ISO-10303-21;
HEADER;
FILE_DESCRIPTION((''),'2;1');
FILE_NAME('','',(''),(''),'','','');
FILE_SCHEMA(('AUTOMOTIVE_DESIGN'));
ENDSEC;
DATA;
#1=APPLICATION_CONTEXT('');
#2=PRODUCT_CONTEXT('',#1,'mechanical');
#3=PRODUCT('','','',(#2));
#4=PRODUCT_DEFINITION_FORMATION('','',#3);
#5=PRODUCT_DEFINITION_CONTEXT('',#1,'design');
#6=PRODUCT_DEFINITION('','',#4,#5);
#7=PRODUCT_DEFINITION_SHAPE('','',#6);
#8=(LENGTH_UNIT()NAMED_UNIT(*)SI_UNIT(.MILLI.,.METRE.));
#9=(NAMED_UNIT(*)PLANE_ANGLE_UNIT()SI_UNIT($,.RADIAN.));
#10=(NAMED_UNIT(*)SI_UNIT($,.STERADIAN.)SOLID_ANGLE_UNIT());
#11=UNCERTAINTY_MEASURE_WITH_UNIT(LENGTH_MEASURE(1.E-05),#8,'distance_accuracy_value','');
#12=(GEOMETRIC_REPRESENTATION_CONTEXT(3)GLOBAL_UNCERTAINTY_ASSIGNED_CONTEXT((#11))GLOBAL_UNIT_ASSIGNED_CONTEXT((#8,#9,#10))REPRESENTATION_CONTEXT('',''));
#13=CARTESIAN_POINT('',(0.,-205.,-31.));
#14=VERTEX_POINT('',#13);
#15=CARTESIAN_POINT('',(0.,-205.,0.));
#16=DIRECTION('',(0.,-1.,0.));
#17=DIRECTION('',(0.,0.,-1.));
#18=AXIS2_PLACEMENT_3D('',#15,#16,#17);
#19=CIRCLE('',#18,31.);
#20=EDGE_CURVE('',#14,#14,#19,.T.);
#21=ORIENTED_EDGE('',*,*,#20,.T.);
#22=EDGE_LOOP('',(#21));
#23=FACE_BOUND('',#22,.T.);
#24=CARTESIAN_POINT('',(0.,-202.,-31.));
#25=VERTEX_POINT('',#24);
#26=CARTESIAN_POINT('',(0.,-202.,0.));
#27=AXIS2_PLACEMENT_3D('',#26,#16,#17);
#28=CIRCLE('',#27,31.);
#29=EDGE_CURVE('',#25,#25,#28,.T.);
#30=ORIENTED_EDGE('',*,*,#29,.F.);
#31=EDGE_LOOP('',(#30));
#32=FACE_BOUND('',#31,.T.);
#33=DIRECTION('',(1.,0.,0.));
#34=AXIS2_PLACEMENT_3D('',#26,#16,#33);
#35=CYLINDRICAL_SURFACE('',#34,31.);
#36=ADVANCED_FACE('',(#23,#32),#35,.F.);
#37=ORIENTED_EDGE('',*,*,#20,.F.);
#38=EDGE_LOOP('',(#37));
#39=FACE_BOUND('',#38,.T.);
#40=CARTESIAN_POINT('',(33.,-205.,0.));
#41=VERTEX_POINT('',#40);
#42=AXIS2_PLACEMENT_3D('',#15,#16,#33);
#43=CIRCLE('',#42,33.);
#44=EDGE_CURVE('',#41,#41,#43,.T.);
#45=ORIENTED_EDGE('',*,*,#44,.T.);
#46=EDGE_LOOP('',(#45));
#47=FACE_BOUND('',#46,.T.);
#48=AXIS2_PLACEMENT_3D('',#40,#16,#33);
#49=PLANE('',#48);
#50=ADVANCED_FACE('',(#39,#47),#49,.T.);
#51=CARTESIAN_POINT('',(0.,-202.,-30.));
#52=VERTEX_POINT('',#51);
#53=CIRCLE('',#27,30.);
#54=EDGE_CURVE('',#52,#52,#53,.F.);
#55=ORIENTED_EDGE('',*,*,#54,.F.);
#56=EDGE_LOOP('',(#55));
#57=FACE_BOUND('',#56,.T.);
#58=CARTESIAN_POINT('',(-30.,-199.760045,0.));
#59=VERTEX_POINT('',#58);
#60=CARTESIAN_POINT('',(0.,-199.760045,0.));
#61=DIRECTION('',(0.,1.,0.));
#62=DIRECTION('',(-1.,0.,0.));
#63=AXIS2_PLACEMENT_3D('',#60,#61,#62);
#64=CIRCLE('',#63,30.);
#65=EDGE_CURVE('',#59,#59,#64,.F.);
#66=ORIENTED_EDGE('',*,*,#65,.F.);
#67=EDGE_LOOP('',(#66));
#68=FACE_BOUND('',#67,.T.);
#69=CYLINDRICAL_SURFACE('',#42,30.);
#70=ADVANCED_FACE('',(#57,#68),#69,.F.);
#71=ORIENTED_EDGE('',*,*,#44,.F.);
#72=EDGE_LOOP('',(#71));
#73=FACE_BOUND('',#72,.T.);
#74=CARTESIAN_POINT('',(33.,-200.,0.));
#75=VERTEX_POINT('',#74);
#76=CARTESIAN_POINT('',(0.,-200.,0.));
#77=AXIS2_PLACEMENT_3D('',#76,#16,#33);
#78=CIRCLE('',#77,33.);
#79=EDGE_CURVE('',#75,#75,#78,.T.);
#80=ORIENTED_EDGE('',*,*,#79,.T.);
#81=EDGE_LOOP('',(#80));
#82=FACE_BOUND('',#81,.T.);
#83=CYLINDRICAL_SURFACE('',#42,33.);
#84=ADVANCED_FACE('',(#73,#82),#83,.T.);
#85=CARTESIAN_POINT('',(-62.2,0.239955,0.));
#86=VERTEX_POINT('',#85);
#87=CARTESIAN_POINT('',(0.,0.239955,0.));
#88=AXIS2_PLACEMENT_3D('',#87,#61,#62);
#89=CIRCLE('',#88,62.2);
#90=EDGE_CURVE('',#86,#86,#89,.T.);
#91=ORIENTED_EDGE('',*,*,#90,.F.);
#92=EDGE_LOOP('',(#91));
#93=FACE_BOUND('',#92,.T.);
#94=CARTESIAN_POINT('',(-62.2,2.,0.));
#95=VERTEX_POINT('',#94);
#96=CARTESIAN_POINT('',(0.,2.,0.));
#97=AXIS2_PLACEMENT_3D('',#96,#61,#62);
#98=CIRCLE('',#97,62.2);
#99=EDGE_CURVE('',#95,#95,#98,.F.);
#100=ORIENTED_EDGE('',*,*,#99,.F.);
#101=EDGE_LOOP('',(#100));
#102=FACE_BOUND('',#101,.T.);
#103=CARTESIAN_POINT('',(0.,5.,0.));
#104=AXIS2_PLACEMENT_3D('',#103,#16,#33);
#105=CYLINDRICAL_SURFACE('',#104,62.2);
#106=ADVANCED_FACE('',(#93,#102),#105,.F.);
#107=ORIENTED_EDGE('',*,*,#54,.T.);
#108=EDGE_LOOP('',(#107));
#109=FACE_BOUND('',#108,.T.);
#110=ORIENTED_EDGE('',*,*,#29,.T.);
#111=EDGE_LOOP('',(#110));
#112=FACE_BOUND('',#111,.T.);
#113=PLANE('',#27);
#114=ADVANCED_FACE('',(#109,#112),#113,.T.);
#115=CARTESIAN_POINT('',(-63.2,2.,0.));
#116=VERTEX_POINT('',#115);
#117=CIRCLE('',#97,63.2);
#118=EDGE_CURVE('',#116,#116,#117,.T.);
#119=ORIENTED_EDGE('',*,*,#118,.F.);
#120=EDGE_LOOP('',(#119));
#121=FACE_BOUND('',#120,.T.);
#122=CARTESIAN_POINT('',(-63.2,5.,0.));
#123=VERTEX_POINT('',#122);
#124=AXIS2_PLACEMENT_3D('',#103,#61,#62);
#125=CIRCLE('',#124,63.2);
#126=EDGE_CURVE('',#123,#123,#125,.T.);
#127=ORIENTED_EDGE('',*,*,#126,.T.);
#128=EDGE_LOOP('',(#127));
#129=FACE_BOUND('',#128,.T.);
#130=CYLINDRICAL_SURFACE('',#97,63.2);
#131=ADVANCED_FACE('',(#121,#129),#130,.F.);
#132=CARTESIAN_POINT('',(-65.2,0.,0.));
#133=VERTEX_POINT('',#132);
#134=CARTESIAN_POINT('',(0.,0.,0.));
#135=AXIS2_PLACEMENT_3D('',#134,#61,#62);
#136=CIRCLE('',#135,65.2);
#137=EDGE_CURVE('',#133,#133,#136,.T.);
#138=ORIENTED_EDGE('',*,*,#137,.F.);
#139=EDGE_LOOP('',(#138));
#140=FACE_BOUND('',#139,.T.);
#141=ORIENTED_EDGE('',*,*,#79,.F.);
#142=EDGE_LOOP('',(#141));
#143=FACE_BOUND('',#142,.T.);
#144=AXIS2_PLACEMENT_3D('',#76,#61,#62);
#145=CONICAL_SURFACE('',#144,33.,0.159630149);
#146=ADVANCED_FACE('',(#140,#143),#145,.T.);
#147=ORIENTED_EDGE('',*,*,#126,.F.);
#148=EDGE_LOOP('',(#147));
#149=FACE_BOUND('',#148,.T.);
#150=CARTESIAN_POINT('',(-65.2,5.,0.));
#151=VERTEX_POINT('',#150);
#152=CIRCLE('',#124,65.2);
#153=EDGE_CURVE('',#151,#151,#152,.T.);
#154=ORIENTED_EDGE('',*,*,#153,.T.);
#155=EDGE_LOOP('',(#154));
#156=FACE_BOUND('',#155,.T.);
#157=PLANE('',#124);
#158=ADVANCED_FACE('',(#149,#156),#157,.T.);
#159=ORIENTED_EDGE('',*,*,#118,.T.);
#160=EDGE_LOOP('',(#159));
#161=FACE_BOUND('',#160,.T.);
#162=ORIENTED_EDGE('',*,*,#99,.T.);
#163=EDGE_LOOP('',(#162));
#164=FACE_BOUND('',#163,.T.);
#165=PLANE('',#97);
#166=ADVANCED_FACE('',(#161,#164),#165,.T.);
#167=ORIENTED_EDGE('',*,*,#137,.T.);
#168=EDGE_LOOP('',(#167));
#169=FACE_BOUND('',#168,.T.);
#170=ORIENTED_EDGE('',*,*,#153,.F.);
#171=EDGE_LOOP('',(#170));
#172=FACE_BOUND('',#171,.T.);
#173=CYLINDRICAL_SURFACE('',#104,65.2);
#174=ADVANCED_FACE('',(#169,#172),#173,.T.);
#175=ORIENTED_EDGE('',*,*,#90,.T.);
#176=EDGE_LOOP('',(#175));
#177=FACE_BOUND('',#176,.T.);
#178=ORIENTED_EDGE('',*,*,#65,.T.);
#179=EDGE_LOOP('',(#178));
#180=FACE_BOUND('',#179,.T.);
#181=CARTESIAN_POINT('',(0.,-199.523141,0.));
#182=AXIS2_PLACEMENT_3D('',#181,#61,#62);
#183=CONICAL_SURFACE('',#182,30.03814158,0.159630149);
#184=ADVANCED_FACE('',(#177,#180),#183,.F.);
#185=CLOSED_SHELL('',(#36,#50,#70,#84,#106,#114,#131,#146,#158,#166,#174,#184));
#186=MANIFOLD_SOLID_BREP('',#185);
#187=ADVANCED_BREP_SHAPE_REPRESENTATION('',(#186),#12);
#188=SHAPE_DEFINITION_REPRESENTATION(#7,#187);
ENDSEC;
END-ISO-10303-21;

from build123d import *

# Parameters (mm, degrees)
SKETCH_3_R          = 65.2
EXTRUDE_2_DEPTH     = 5
SHELL_1_T           = -3
CUT_EXTRUDE_START   = -3
SKETCH_4_R          = 63.2
SKETCH_4_R_2        = 62.2
CUT_EXTRUDE_3_DEPTH = 3
SKETCH_7_R          = 31
SKETCH_7_R_2        = 30
CUT_EXTRUDE_6_DEPTH = 3


with BuildPart() as part:
    # 스케치1 → 회전1 (revolve)
    with BuildSketch(Plane.XY):
        Polygon((0, 0), (65.2, 0), (33, -200), (33, -205), (0, -205), align=None)
    revolve(axis=Axis((0, -205, 0), (0, 1, 0)))

    # 스케치3 → 보스-돌출2 (add)
    with BuildSketch(Plane(origin=(0, 0, 0), x_dir=(1, 0, 0), z_dir=(0, 1, 0))):
        Circle(SKETCH_3_R)
    extrude(amount=EXTRUDE_2_DEPTH)

    # 쉘1
    shell_1_openings = [part.faces().sort_by_distance(p)[0] for p in [
        (0, -205, 0),
        (0, 5, 0),
    ]]
    offset(amount=SHELL_1_T, openings=shell_1_openings, kind=Kind.INTERSECTION)

    # 스케치4 → 컷-돌출3 (cut)
    with BuildSketch(Plane(origin=(0, 5, 0), x_dir=(1, 0, 0), z_dir=(0, 1, 0)).offset(CUT_EXTRUDE_START)):
        Circle(SKETCH_4_R)
        Circle(SKETCH_4_R_2, mode=Mode.SUBTRACT)
    extrude(amount=CUT_EXTRUDE_3_DEPTH, mode=Mode.SUBTRACT)

    # 스케치7 → 컷-돌출6 (cut)
    with BuildSketch(Plane.XZ.offset(205)):
        Circle(SKETCH_7_R)
        Circle(SKETCH_7_R_2, mode=Mode.SUBTRACT)
    extrude(amount=-CUT_EXTRUDE_6_DEPTH, mode=Mode.SUBTRACT)


solid = part.part
